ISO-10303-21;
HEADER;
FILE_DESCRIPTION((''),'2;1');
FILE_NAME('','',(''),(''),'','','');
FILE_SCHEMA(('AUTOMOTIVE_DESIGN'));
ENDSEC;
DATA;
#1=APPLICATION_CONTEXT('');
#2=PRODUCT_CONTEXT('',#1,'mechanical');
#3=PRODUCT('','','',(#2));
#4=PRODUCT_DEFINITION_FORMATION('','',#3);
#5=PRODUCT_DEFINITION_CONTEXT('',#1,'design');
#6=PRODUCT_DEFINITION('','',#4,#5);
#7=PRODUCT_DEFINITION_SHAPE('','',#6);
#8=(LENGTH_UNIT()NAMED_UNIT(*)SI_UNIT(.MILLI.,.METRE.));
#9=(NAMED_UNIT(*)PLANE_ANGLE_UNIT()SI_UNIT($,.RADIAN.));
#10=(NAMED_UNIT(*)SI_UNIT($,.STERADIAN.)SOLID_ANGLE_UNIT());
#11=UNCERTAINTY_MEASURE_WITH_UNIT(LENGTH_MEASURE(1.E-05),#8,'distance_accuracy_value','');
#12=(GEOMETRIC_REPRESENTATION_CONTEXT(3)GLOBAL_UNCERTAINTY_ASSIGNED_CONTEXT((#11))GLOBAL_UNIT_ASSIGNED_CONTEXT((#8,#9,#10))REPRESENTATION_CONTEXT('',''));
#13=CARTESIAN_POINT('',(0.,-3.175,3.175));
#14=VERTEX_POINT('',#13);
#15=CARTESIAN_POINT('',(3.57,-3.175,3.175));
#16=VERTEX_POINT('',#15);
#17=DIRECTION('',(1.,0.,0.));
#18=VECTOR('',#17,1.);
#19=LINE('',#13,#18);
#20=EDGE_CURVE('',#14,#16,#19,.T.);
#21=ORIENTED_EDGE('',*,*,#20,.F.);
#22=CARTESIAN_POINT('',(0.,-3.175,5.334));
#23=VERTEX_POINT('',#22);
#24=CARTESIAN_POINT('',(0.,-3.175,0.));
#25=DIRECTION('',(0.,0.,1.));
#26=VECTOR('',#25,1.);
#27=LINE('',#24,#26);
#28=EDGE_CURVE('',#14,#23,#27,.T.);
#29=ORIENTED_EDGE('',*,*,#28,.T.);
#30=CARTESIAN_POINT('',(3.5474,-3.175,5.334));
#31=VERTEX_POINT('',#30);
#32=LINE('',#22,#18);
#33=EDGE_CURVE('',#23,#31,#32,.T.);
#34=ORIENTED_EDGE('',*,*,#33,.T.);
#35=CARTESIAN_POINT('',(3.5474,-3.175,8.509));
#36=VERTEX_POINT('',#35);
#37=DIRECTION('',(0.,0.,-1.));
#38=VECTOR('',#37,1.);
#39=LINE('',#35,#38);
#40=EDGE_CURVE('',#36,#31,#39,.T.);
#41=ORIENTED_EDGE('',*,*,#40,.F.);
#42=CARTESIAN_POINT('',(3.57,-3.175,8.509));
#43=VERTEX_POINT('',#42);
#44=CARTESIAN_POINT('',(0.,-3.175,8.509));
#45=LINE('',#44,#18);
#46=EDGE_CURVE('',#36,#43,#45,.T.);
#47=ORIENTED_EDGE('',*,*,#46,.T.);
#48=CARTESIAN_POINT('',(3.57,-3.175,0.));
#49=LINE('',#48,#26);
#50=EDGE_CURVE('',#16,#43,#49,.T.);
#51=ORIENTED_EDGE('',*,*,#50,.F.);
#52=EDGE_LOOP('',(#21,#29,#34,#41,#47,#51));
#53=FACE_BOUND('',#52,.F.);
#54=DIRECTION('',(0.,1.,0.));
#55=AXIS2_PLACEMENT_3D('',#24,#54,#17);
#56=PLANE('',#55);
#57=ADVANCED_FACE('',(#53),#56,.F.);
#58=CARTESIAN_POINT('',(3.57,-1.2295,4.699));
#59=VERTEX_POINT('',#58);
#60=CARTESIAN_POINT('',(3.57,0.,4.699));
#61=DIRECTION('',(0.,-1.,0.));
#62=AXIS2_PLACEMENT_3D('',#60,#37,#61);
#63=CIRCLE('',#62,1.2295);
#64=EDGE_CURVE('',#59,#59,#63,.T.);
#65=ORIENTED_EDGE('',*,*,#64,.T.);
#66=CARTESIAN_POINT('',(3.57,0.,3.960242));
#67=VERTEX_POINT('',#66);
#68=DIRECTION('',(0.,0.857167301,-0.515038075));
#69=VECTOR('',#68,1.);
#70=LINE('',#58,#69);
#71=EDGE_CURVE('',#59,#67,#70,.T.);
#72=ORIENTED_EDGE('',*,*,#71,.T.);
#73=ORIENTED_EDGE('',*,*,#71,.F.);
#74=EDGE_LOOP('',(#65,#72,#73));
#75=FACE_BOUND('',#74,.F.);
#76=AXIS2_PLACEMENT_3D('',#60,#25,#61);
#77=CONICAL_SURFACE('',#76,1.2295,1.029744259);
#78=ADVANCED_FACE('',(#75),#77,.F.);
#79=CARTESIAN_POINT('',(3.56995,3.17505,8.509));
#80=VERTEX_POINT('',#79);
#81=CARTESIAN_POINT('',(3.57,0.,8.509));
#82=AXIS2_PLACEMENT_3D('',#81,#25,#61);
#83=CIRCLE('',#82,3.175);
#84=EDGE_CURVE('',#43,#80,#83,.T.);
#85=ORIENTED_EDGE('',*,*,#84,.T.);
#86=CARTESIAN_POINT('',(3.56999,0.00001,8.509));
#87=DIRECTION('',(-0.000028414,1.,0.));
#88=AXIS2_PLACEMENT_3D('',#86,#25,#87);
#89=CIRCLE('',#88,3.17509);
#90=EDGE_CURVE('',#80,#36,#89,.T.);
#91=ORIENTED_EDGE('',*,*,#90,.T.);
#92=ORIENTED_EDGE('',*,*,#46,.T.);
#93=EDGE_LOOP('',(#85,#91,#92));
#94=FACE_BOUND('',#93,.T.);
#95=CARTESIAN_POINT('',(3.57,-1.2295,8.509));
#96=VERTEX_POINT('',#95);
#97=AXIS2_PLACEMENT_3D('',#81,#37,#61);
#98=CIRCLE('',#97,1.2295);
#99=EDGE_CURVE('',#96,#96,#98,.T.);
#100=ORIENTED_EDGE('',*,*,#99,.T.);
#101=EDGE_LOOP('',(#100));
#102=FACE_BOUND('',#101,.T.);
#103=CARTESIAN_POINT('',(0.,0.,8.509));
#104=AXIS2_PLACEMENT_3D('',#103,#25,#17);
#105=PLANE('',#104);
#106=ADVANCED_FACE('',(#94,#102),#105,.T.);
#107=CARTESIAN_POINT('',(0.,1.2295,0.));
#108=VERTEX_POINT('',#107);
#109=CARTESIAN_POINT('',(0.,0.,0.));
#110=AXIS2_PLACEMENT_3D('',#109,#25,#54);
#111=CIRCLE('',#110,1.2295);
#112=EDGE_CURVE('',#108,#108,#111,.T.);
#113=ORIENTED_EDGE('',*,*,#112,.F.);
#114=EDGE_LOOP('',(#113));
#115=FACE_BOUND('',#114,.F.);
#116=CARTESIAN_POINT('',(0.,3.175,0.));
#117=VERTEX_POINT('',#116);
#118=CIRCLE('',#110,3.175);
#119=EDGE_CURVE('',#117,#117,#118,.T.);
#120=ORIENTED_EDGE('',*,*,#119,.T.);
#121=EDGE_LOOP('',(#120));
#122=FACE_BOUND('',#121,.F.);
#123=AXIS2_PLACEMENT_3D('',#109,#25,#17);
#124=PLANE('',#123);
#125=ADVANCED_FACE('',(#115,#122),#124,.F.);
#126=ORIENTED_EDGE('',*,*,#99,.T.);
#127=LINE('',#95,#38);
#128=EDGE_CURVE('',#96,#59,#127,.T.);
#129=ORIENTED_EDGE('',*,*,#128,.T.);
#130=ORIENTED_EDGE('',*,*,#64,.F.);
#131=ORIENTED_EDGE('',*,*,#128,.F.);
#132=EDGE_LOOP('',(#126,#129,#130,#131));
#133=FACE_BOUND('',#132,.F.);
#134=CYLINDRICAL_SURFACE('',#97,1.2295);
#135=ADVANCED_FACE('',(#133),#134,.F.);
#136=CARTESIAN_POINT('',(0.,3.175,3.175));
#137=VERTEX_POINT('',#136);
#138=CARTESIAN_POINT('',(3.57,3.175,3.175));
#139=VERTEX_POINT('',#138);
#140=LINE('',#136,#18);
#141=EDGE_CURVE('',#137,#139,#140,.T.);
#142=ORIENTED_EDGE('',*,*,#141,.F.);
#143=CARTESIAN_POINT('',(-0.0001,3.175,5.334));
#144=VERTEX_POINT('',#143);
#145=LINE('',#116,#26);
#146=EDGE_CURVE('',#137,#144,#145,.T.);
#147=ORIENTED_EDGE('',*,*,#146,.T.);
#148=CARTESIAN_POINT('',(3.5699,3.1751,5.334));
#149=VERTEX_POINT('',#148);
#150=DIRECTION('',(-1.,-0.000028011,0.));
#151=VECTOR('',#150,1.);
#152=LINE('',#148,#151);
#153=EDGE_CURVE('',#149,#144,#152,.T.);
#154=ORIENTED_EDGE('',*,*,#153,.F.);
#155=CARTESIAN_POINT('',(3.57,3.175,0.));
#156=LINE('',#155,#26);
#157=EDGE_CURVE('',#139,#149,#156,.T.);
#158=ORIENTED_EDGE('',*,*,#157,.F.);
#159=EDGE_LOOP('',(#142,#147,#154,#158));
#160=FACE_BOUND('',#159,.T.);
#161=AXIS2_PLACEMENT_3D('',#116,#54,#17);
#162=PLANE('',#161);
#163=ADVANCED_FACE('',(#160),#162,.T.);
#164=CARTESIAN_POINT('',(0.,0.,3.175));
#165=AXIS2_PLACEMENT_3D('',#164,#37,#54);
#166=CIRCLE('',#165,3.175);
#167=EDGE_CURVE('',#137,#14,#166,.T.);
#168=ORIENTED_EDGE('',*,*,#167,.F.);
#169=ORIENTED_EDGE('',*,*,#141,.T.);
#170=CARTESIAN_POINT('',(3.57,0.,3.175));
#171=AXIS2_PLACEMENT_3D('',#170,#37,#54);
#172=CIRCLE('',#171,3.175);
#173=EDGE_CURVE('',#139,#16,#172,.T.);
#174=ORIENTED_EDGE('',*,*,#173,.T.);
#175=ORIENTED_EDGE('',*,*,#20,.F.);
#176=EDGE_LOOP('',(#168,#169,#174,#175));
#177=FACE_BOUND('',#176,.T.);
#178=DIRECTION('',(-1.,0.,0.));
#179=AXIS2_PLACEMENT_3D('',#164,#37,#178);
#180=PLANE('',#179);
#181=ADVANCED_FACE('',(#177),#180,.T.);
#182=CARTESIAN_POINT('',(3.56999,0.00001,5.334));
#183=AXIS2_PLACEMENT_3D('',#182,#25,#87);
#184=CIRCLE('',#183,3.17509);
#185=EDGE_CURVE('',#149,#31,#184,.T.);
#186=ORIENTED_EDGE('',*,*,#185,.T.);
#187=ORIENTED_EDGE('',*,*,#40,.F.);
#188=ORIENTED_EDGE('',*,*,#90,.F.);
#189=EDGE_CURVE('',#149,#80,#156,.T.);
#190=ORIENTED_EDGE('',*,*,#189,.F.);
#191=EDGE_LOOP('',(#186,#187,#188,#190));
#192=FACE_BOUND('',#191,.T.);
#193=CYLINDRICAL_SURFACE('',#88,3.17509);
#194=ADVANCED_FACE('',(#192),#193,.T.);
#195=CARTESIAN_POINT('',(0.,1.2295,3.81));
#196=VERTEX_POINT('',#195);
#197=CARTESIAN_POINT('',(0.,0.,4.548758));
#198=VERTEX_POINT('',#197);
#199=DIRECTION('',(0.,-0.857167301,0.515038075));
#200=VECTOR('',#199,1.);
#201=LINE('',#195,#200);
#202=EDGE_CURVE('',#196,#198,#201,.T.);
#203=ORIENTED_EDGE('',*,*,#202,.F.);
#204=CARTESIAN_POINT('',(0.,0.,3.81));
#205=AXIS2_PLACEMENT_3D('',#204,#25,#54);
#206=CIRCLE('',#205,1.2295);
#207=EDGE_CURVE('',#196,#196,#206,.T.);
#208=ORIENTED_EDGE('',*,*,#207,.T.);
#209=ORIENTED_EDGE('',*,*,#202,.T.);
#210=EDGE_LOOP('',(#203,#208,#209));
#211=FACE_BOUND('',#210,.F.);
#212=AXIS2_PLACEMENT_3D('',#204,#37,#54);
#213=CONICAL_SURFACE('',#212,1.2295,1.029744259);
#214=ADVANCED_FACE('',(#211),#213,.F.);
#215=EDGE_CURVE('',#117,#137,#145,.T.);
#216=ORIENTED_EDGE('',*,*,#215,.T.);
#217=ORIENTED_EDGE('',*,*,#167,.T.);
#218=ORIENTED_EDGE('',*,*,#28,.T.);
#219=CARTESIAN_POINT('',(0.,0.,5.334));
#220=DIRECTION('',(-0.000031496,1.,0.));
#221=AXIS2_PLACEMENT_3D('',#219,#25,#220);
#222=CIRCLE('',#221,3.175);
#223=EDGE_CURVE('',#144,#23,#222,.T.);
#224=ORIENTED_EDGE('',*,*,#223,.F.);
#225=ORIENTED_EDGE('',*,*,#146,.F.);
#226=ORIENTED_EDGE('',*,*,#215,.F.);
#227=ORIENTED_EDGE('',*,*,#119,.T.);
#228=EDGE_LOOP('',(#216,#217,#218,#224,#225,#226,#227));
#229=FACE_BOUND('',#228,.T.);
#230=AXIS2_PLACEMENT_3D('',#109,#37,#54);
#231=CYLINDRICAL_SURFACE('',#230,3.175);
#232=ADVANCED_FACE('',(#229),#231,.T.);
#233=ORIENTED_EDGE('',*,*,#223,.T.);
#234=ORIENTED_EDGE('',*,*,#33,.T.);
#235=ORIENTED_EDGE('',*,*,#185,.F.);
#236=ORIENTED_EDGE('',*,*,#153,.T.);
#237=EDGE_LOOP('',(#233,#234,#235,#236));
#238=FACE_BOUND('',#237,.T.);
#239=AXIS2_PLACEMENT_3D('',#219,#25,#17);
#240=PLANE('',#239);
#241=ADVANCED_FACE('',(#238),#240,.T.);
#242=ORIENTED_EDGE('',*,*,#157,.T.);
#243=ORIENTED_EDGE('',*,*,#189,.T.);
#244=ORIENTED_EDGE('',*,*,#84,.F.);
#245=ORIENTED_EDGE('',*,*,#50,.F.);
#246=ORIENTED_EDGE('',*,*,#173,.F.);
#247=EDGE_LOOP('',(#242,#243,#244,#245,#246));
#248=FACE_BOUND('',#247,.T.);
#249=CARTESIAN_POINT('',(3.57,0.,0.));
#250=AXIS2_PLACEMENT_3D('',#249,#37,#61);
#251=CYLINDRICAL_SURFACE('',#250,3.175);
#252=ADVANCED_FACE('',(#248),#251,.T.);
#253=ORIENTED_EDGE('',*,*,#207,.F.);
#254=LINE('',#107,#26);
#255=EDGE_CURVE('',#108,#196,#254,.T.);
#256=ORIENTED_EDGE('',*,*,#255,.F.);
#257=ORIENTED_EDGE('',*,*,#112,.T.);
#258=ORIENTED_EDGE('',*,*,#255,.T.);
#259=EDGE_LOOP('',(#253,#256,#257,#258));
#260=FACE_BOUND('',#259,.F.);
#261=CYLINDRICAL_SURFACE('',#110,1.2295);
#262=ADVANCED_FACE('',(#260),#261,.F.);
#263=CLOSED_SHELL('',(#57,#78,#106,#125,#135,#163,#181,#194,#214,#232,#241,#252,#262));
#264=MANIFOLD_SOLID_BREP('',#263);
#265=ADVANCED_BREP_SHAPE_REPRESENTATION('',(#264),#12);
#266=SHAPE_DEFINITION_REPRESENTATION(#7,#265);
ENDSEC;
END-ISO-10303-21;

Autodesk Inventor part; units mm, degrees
ref_plane "YZ Plane" through (0, 0, 0) normal (1, 0, 0) x (0, 1, 0)
ref_plane "XZ Plane" through (0, 0, 0) normal (0, 1, 0) x (-1, 0, 0)
ref_plane "XY Plane" through (0, 0, 0) normal (0, 0, 1) x (1, 0, 0)
sketch "Sketch2" plane through (0, 0, 0) normal (0, 0, 1) x (1, 0, 0)
  arc A0 (3.57, -3.175) -> (3.57, 3.175) centre (3.57, 0) ccw
  arc A1 (0, 3.175) -> (0, -3.175) centre (0, 0) ccw
  line L0 (0, 3.175) -> (3.57, 3.175)
  line L1 (0, -3.175) -> (3.57, -3.175)
  dimension "d14" = 6.35
  dimension "d15" = 6.35
  dimension "d16" = 0
  dimension "d17" = 0
  dimension "d18" = 3.57
  dimension "d19" = 0
extrude "Extrusion2" add sketch "Sketch2" along normal blind 8.509
sketch "Sketch3" plane through (0, 0, 8.509) normal (0, 0, 1) x (1, 0, 0)
  point P0 (0, 0)
  point P1 (3.57, 0)
  dimension "d22" = 3.57
  dimension "d23" = 0
hole "Hole1" at (3.57, 0, 8.509) direction (0, 0, -1) diameter 2.459 depth 3.81 tip angle 118 thread size "M3x0.5" class "6H" standard "ISO Metric profile"
sketch "Sketch4" plane through (0, 0, 0) normal (0, 0, -1) x (-1, 0, 0)
  point P0 (0, 0)
hole "Hole2" at (0, 0, 0) direction (0, 0, 1) diameter 2.459 depth 3.81 tip angle 118 thread size "M3x0.5" class "6H" standard "ISO Metric profile"
sketch "Sketch5" plane through (0, 0, 0) normal (0, 0, -1) x (-1, 0, 0)
  arc A0 (-3.57, 3.175) -> (-3.57, -3.175) centre (-3.57, 0) ccw
  arc A1 (0, 3.175) -> (0, -3.175) centre (0, 0) ccw
  line L0 (0, 3.175) -> (-3.57, 3.175)
  arc A2 (0, -3.175) -> (0, 3.175) centre (0, 0) ccw projected
  line L1 (0, -3.175) -> (-3.57, -3.175)
  dimension "d42" = 3.57
extrude "Extrusion3" cut sketch "Sketch5" against normal blind 3.175 from surface at 0 contours L0 A1 L1 A0
sketch "Sketch6" plane through (0, 0, 8.509) normal (0, 0, 1) x (1, 0, 0)
  arc A0 (3.5699, 3.1751) -> (3.5474, -3.175) centre (3.57, 0) ccw
  line L0 (3.5699, 3.1751) -> (-0.0001, 3.175)
  line L1 (0, -3.175) -> (3.57, -3.175) projected
  line L2 (3.5474, -3.175) -> (0, -3.175)
  arc A1 (-0.0001, 3.175) -> (0, -3.175) centre (0, 0) ccw
  dimension "d43" = 3.57
extrude "Extrusion4" cut sketch "Sketch6" against normal blind 3.175
properties part number "PC104_EM-113 standoff_3.57"
